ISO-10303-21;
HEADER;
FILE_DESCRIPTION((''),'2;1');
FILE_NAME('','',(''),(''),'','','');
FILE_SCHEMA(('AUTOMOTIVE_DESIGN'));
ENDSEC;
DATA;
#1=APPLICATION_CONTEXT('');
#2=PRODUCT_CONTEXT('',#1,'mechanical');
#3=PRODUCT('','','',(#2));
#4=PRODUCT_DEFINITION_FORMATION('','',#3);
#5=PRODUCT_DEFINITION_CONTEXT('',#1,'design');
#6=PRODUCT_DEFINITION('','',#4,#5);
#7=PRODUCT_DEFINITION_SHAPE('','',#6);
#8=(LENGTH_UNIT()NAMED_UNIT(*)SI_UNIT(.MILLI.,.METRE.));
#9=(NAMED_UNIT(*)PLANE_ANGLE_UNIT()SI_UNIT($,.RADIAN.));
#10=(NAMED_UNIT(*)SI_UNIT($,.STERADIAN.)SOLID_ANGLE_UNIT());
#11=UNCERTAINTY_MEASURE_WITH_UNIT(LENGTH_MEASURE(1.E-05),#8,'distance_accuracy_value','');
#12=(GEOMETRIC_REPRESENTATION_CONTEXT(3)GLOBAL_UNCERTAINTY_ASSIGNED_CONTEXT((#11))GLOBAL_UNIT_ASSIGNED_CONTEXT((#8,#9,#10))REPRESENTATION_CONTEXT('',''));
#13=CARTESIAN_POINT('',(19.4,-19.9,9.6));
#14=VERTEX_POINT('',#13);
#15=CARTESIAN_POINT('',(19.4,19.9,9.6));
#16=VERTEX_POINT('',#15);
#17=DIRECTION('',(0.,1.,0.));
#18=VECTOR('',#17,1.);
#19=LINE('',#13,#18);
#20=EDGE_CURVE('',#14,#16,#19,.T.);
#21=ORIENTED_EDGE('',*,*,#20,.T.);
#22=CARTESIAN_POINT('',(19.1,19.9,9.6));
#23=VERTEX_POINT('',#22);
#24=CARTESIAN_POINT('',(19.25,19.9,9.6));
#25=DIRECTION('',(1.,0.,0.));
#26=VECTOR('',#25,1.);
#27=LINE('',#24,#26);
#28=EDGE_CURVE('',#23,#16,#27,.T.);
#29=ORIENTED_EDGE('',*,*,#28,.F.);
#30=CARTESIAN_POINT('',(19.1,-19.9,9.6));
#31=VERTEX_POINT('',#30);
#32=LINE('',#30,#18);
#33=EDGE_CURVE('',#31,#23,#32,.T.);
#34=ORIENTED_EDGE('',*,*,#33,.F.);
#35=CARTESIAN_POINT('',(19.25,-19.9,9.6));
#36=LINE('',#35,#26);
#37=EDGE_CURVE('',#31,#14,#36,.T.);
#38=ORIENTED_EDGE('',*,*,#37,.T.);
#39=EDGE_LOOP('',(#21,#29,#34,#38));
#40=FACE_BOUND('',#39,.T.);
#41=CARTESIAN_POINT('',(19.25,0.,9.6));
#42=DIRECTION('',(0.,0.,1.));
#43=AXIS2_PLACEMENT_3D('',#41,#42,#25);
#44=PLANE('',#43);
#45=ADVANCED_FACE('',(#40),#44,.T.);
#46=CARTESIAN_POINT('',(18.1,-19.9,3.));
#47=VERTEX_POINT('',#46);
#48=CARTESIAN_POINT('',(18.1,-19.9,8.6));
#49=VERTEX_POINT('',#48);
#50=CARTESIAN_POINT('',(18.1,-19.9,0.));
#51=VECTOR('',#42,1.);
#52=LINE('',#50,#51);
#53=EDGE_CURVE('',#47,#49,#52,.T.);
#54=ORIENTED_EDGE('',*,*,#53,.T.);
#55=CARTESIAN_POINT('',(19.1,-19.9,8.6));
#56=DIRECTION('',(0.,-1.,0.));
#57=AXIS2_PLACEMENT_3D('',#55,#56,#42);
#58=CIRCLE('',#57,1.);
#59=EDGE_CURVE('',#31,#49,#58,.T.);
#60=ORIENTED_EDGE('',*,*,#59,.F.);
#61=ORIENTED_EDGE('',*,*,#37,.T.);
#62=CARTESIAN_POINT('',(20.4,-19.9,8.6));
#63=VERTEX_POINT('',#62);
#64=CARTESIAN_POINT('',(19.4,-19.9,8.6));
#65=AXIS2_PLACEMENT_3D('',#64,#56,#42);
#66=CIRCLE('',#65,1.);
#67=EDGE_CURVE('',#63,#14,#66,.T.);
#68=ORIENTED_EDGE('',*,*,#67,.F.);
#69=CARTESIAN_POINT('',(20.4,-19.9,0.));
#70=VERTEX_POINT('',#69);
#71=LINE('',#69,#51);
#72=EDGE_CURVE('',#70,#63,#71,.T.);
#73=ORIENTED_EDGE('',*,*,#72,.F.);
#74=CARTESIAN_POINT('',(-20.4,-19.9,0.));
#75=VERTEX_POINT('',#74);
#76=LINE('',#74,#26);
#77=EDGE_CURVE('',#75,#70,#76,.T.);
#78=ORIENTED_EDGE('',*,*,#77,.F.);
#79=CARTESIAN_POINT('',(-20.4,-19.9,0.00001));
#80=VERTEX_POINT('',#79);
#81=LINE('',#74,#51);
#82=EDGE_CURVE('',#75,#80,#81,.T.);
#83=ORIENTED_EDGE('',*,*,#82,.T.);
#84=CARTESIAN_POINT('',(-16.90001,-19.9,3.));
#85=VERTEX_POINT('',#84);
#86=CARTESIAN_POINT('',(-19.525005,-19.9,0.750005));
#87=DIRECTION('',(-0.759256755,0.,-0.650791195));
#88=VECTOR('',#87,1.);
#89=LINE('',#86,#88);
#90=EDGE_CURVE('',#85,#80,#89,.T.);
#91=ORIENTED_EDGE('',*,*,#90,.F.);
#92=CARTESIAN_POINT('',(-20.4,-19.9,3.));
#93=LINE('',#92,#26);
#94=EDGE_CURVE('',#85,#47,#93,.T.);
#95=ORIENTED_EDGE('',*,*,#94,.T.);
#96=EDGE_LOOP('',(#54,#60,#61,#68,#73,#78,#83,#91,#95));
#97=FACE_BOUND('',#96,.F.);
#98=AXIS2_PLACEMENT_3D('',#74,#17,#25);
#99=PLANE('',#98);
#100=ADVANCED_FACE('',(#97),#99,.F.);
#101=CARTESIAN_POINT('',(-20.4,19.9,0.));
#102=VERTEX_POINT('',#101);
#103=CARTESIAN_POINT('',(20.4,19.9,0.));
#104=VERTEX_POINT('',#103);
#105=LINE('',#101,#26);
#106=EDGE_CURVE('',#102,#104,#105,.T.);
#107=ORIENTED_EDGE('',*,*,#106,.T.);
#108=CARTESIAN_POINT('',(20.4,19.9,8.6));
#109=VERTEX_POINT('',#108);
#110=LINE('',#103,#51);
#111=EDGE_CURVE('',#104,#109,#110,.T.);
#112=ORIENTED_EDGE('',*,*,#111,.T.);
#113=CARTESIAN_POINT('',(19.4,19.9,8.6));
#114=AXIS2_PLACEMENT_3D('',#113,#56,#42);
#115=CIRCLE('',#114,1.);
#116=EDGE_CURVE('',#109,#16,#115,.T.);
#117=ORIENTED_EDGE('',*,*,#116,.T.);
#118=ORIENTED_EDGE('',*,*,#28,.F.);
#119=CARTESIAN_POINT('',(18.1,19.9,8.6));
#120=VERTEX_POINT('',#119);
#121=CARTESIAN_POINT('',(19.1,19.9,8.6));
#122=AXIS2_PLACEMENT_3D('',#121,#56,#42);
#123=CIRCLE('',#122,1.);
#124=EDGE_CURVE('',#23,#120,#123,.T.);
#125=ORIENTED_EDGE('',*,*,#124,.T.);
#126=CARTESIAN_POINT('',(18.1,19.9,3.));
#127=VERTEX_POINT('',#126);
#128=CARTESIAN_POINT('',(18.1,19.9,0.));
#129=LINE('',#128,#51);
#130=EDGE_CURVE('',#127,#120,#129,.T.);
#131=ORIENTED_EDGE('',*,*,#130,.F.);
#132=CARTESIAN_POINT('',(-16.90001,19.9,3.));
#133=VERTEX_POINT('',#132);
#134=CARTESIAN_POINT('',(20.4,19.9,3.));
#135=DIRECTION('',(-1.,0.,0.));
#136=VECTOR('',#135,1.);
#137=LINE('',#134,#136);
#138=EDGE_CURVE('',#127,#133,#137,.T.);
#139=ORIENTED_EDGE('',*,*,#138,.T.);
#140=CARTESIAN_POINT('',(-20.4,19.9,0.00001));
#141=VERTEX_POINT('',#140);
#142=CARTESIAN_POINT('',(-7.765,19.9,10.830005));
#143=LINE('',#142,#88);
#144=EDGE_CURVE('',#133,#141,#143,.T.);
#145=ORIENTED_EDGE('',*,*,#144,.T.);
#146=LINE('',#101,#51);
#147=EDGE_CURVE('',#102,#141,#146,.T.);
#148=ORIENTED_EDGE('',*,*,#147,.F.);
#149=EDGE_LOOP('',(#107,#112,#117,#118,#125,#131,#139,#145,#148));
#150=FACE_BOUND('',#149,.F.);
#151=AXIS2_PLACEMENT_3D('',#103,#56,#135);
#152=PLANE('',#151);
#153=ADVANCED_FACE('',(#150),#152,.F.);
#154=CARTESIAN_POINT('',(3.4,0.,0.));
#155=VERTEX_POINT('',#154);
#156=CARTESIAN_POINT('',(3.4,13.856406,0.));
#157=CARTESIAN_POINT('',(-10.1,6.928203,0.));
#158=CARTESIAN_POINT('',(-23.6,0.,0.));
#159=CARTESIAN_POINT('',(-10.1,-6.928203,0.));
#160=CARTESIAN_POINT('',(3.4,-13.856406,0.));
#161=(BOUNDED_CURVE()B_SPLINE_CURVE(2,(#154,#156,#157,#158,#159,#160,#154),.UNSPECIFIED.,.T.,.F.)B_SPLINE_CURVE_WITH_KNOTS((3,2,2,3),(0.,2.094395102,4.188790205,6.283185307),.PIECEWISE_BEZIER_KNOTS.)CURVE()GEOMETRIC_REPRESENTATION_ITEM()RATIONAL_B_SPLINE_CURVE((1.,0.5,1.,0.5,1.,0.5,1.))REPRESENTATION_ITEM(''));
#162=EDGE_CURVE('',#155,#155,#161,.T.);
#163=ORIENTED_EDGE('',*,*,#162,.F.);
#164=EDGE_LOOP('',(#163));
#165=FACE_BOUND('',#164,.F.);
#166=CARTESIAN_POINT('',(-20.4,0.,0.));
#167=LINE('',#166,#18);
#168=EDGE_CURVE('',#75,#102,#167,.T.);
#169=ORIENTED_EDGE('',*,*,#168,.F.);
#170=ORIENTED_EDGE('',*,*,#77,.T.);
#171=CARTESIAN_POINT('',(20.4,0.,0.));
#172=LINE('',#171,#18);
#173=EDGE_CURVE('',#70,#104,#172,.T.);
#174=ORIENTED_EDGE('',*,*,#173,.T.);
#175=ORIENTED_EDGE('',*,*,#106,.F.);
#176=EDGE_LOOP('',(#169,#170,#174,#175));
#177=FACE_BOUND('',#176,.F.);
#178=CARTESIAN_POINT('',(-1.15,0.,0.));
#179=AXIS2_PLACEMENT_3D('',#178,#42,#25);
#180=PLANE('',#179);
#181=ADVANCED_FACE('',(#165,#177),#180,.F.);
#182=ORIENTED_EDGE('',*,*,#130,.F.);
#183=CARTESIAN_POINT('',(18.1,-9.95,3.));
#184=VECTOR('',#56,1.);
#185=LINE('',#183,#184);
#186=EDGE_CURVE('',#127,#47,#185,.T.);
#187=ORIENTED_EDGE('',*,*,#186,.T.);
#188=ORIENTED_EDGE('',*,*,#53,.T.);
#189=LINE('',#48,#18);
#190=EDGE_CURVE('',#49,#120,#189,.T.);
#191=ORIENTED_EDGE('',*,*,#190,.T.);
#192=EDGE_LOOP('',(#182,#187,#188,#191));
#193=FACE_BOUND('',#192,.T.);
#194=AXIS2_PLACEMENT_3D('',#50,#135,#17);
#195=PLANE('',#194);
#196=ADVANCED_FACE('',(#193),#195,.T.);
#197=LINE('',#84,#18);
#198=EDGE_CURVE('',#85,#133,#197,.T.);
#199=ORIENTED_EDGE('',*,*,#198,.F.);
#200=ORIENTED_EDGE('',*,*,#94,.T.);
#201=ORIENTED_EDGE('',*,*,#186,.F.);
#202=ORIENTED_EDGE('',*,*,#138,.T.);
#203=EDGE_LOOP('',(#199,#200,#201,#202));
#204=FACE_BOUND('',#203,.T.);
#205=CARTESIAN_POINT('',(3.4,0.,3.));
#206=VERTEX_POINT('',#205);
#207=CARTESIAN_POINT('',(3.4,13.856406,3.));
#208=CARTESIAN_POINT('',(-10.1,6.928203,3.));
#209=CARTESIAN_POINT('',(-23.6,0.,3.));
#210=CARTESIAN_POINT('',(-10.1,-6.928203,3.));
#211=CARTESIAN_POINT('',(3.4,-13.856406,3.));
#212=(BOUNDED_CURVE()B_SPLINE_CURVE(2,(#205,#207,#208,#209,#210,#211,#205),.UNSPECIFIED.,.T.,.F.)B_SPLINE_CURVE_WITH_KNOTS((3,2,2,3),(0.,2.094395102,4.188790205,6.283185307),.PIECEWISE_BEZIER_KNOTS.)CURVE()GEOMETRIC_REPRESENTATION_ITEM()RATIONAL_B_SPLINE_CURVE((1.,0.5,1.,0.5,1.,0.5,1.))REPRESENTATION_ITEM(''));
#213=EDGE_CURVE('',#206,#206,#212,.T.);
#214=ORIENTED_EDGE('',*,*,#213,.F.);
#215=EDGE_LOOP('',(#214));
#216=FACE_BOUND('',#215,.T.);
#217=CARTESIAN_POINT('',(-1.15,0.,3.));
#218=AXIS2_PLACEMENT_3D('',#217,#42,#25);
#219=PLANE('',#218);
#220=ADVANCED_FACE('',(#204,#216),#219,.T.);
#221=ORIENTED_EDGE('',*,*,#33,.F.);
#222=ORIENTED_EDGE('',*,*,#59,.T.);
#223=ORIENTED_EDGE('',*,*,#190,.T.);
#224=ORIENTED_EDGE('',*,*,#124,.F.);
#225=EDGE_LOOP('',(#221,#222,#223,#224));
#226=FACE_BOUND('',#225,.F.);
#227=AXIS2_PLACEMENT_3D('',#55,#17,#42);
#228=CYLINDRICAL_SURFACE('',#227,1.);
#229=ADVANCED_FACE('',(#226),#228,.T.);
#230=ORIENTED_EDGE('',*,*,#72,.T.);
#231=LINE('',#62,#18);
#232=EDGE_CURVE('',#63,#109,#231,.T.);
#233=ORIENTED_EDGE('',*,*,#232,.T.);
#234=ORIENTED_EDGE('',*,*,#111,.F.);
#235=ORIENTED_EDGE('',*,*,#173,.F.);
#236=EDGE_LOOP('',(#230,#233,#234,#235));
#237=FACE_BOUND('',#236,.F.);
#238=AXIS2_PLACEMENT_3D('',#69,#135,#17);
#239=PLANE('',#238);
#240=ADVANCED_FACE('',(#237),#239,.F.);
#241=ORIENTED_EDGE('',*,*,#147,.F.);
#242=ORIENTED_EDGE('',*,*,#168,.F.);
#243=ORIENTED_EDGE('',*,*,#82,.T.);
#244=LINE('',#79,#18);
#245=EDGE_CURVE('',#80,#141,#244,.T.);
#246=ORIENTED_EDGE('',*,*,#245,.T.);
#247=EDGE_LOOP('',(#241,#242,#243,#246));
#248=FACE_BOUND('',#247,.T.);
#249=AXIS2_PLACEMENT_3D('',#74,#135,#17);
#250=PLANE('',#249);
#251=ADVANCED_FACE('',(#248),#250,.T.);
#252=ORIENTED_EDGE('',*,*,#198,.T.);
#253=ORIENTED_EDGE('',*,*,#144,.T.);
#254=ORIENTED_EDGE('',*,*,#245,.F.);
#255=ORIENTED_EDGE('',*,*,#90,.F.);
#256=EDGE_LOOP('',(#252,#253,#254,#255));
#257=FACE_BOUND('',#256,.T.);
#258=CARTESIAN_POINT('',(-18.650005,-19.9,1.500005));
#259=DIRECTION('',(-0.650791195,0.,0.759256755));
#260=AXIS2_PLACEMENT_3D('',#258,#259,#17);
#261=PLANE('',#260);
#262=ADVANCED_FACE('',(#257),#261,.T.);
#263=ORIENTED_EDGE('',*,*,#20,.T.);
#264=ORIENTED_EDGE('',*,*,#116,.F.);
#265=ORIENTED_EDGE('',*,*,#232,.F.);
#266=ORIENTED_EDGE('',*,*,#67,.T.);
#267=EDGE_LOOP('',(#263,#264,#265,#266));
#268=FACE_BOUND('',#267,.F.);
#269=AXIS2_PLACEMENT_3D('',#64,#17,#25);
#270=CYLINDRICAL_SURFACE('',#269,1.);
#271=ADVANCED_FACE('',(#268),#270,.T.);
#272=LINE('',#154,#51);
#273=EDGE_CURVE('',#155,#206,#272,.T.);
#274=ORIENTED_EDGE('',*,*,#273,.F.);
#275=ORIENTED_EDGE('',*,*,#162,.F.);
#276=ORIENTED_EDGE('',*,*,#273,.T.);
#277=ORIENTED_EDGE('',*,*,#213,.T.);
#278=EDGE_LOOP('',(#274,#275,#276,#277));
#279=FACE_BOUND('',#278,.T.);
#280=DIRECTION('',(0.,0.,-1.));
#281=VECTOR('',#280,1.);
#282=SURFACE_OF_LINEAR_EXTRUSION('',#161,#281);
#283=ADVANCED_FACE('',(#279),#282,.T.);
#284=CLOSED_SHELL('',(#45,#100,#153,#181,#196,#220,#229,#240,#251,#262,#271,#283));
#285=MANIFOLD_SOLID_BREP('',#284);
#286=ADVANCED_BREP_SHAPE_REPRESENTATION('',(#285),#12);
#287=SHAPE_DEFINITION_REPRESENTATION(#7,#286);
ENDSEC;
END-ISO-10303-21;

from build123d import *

# Parameters (mm, degrees)
F0_W     = 38.5
F0_H     = 39.8
F0_W_2   = 2.3
F1_DEPTH = 3
F2_DEPTH = 9.6
F3_R     = 1
F4_SIZE2 = 2.99999
F4_SIZE  = 3.49999


# Not quite as in the source:
# - a fillet or chamfer is up to 0.001 mm smaller than in the source, because OpenCascade refuses the exact size


with BuildPart() as f1:
    # F0 (on Top) → F1 (new body)
    with BuildSketch(Plane.XY):
        with Locations((-1.15, 0)):
            Rectangle(F0_W, F0_H)
        with BuildLine():
            add(Edge.make_bspline(
                [(3.4, 0), (3.4, 13.8564064606), (-10.1, 6.9282032303), (-23.6, 0), (-10.1, -6.9282032303), (3.4, -13.8564064606), (3.4, 0)],
                knots=[0, 0, 0, 2.0943951024, 2.0943951024, 4.1887902048, 4.1887902048, 6.2831853072, 6.2831853072, 6.2831853072], degree=2, weights=[1, 0.5, 1, 0.5, 1, 0.5, 1]))
        make_face(mode=Mode.SUBTRACT)
        with Locations((19.25, 0)):
            Rectangle(F0_W_2, F0_H)
    extrude(amount=F1_DEPTH)

    # F0 (on Top) → F2 (join)
    with BuildSketch(Plane.XY):
        with Locations((19.25, 0)):
            Rectangle(F0_W_2, F0_H)
    extrude(amount=F2_DEPTH)

    # F3
    f3_edges = [f1.edges().sort_by_distance(p)[0] for p in [
        (18.1, 0, 9.6),
        (20.4, 0, 9.6),
    ]]
    fillet(f3_edges, radius=F3_R)

    # F4 (size 3.5 and 3 in the source; OpenCascade refuses exactly that, so slightly less here)
    f4_edges = [f1.edges().sort_by_distance(p)[0] for p in [
        (-20.4, 0, 3),
    ]]
    f4_side = f1.faces().sort_by_distance((-1.15, 19.346259, 3))[0]
    chamfer(f4_edges, length=F4_SIZE, length2=F4_SIZE2, reference=f4_side)


solid = f1.part
